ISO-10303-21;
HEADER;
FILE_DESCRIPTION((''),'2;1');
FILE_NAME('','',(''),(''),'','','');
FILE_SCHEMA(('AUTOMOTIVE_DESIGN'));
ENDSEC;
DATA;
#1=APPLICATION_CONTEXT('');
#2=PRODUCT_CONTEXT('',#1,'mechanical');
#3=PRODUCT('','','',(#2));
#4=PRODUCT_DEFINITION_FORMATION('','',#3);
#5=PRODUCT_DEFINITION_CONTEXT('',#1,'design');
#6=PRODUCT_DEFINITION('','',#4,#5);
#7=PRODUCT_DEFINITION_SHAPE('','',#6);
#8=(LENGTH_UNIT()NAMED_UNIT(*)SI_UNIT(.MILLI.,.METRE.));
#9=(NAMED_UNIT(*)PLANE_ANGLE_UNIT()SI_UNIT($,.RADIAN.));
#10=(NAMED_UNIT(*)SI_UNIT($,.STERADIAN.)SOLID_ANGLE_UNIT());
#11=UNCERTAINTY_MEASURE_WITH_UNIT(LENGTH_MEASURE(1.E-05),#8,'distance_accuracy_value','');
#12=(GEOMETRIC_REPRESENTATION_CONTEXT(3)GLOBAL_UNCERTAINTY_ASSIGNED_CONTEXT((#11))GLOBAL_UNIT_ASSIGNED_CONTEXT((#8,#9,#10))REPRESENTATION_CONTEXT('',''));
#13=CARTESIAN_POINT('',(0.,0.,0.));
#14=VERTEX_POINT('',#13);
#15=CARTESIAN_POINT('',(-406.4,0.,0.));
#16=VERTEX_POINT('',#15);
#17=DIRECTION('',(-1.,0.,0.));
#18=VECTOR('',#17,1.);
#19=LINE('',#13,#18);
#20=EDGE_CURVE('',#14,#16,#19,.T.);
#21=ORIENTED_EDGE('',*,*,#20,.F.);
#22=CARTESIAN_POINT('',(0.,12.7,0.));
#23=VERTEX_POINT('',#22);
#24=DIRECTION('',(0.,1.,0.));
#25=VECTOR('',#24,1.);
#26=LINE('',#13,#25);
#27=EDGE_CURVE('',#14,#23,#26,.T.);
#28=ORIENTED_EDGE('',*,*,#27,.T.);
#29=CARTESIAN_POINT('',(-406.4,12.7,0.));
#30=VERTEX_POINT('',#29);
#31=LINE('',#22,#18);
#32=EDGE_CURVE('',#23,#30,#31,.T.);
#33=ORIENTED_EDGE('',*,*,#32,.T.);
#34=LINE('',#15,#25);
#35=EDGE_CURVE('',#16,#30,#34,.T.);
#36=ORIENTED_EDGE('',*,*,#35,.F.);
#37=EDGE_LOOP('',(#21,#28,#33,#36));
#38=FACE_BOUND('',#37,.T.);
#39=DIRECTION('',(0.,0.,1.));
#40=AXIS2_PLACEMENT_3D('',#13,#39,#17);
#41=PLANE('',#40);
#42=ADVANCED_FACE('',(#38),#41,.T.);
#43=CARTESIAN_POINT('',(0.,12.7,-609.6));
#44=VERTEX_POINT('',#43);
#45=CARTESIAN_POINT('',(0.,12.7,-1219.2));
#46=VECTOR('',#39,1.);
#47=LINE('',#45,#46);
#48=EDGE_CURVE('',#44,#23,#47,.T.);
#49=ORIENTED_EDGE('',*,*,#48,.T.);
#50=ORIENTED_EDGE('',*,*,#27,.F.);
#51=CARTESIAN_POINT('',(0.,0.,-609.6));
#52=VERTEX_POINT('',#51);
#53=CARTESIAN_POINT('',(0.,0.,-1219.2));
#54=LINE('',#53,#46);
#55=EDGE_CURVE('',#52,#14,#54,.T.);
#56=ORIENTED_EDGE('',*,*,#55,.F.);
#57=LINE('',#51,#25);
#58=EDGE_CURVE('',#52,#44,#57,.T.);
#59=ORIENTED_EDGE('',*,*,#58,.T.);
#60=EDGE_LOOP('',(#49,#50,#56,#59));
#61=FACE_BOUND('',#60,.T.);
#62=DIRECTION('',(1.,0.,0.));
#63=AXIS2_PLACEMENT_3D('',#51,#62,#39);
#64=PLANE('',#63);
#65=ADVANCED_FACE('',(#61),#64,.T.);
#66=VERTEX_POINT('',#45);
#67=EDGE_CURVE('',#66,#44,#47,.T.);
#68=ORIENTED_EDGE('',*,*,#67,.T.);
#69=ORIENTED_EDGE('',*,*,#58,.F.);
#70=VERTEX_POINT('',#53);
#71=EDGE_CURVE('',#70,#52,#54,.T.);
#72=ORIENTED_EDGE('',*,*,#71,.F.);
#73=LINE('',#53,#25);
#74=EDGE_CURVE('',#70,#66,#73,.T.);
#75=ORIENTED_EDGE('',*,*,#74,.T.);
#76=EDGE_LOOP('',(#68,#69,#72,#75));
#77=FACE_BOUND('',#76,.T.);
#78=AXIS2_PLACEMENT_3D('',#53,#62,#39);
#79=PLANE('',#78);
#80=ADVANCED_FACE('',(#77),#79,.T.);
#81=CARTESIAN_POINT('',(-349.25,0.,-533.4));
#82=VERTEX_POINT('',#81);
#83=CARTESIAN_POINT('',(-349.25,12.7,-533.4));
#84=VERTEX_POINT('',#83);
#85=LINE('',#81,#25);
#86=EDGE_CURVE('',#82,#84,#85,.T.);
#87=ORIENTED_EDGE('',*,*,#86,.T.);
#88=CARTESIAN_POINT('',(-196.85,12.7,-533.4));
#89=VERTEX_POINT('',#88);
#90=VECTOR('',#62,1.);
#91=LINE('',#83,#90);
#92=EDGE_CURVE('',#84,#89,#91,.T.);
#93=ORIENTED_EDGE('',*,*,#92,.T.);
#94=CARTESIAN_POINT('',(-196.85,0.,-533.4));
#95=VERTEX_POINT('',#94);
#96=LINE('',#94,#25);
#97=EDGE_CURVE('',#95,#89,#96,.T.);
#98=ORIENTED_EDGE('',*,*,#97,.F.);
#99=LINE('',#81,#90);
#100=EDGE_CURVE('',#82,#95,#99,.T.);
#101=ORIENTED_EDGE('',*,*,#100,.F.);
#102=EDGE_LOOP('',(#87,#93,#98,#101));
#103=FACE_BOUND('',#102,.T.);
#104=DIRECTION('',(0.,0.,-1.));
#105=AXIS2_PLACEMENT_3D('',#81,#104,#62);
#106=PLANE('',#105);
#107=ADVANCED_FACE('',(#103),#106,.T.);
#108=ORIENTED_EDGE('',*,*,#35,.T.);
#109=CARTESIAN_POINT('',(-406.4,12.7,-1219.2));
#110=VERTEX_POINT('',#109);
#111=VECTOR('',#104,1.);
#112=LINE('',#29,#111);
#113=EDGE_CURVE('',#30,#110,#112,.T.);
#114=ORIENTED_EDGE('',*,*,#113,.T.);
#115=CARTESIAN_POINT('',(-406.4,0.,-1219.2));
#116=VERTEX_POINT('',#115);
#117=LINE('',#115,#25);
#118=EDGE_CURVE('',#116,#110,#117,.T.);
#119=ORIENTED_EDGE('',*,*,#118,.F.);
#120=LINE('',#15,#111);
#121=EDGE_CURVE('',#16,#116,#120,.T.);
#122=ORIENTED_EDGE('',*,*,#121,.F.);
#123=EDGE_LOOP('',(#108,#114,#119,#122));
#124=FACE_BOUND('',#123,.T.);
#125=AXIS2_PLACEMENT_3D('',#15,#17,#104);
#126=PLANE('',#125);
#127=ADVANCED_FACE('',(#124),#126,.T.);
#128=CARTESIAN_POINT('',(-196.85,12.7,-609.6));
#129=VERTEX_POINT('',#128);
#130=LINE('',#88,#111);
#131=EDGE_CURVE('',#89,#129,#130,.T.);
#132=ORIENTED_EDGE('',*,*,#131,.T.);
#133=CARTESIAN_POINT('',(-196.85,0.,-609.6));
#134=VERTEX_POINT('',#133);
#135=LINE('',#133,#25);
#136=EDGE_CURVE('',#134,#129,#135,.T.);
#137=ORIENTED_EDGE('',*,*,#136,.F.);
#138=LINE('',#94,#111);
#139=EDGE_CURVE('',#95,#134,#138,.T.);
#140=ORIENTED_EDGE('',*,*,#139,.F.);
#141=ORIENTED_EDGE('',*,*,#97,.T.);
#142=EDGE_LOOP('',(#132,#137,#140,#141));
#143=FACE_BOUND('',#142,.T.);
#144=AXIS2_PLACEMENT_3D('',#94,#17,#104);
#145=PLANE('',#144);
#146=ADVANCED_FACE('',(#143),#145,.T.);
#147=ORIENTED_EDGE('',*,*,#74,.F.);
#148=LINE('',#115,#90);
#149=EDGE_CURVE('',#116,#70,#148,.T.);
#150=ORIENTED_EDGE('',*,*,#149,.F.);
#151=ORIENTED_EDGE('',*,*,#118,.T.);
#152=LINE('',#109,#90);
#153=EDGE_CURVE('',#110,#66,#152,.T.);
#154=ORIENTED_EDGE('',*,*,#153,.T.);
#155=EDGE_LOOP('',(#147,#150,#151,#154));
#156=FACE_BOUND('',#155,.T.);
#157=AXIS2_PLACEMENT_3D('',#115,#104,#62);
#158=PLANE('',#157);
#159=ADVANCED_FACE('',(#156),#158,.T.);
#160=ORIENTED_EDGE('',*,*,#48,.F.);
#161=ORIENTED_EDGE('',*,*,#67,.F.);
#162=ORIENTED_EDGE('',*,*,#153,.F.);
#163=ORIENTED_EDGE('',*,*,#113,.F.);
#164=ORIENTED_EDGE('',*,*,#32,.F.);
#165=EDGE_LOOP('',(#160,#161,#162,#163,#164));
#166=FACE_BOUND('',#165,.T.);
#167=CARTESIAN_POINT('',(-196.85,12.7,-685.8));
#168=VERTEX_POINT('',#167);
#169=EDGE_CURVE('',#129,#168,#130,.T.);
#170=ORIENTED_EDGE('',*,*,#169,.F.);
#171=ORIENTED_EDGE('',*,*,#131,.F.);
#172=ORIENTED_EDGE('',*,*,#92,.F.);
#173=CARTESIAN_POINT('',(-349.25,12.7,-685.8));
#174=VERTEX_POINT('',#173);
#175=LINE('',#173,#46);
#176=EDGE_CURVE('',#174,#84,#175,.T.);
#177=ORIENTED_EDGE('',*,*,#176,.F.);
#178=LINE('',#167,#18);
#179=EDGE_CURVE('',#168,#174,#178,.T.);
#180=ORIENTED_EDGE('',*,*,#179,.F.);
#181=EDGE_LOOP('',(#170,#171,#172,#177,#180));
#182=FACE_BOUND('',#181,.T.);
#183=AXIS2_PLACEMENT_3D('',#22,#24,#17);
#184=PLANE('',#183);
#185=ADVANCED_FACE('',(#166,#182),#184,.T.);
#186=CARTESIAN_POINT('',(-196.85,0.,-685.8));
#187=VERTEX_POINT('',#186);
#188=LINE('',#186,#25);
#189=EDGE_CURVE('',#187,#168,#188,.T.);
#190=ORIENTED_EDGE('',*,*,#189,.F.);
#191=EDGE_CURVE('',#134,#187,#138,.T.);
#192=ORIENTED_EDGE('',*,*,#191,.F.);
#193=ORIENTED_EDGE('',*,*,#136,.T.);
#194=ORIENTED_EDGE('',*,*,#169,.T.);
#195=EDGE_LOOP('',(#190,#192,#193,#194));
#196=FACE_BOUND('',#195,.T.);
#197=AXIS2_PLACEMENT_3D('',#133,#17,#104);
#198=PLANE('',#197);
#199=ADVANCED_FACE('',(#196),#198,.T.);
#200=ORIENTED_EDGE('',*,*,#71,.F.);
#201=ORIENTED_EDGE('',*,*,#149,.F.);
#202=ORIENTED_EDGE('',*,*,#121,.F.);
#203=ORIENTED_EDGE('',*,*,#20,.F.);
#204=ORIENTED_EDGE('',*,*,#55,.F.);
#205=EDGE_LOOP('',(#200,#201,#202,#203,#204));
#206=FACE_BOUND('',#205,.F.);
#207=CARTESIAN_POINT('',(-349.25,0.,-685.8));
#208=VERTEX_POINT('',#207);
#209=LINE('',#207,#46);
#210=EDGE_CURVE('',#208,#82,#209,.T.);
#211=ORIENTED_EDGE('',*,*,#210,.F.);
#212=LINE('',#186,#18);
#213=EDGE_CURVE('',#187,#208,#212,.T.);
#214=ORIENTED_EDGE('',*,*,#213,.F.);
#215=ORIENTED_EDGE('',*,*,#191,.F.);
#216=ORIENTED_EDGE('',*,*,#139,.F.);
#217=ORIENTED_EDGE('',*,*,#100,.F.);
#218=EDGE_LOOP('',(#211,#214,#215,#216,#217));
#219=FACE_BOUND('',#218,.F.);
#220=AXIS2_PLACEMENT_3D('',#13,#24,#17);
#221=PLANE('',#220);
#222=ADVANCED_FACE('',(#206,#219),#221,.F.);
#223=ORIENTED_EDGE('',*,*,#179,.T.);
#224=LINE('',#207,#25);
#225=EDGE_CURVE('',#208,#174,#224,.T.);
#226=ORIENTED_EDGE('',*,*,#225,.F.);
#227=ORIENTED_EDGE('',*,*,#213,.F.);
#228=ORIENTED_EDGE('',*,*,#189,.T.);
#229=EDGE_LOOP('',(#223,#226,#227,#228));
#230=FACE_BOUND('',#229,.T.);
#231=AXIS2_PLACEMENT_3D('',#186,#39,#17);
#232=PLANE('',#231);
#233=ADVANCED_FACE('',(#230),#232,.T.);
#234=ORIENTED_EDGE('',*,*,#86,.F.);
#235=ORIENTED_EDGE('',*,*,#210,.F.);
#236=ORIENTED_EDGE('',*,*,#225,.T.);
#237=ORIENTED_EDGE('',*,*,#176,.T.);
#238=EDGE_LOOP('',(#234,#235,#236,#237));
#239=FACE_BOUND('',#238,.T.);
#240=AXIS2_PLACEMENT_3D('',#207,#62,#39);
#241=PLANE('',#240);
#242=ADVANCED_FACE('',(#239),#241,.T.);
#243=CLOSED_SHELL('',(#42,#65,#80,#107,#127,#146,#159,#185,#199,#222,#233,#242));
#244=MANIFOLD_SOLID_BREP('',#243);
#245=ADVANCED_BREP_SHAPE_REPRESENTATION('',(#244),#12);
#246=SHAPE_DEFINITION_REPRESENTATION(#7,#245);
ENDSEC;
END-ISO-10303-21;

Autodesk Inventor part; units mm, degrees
ref_plane "YZ Plane" through (0, 0, 0) normal (1, 0, 0) x (0, 1, 0)
ref_plane "XZ Plane" through (0, 0, 0) normal (0, 1, 0) x (-1, 0, 0)
ref_plane "XY Plane" through (0, 0, 0) normal (0, 0, 1) x (1, 0, 0)
sketch "Sketch1" plane through (0, 0, 0) normal (0, 1, 0) x (-1, 0, 0)
  line L0 (0, 0) -> (406.4, 0)
  line L1 (406.4, 0) -> (406.4, -1219.2)
  line L2 (406.4, -1219.2) -> (0, -1219.2)
  line L3 (0, -1219.2) -> (0, 0)
  line L4 (0, -609.6) -> (101.6, -609.6)
  line L5 (101.6, -609.6) -> (184.15, -609.6)
  line L6 (184.15, -609.6) -> (273.05, -609.6)
  line L7 (349.25, -533.4) -> (196.85, -533.4)
  line L8 (196.85, -533.4) -> (196.85, -685.8)
  line L9 (196.85, -685.8) -> (349.25, -685.8)
  line L10 (349.25, -685.8) -> (349.25, -533.4)
  line L11 (349.25, -533.4) -> (196.85, -685.8) construction
  line L12 (196.85, -533.4) -> (349.25, -685.8) construction
  dimension "d0" = 1219.2
  dimension "d1" = 406.4
  dimension "d2" = 101.6
  dimension "d3" = 82.55
  dimension "d4" = 88.9
  dimension "d5" = 152.4
  dimension "d6" = 152.4
extrude "Extrusion1" add sketch "Sketch1" along normal blind 12.7
properties part number "backBoard" material "Wood (Birch)"
